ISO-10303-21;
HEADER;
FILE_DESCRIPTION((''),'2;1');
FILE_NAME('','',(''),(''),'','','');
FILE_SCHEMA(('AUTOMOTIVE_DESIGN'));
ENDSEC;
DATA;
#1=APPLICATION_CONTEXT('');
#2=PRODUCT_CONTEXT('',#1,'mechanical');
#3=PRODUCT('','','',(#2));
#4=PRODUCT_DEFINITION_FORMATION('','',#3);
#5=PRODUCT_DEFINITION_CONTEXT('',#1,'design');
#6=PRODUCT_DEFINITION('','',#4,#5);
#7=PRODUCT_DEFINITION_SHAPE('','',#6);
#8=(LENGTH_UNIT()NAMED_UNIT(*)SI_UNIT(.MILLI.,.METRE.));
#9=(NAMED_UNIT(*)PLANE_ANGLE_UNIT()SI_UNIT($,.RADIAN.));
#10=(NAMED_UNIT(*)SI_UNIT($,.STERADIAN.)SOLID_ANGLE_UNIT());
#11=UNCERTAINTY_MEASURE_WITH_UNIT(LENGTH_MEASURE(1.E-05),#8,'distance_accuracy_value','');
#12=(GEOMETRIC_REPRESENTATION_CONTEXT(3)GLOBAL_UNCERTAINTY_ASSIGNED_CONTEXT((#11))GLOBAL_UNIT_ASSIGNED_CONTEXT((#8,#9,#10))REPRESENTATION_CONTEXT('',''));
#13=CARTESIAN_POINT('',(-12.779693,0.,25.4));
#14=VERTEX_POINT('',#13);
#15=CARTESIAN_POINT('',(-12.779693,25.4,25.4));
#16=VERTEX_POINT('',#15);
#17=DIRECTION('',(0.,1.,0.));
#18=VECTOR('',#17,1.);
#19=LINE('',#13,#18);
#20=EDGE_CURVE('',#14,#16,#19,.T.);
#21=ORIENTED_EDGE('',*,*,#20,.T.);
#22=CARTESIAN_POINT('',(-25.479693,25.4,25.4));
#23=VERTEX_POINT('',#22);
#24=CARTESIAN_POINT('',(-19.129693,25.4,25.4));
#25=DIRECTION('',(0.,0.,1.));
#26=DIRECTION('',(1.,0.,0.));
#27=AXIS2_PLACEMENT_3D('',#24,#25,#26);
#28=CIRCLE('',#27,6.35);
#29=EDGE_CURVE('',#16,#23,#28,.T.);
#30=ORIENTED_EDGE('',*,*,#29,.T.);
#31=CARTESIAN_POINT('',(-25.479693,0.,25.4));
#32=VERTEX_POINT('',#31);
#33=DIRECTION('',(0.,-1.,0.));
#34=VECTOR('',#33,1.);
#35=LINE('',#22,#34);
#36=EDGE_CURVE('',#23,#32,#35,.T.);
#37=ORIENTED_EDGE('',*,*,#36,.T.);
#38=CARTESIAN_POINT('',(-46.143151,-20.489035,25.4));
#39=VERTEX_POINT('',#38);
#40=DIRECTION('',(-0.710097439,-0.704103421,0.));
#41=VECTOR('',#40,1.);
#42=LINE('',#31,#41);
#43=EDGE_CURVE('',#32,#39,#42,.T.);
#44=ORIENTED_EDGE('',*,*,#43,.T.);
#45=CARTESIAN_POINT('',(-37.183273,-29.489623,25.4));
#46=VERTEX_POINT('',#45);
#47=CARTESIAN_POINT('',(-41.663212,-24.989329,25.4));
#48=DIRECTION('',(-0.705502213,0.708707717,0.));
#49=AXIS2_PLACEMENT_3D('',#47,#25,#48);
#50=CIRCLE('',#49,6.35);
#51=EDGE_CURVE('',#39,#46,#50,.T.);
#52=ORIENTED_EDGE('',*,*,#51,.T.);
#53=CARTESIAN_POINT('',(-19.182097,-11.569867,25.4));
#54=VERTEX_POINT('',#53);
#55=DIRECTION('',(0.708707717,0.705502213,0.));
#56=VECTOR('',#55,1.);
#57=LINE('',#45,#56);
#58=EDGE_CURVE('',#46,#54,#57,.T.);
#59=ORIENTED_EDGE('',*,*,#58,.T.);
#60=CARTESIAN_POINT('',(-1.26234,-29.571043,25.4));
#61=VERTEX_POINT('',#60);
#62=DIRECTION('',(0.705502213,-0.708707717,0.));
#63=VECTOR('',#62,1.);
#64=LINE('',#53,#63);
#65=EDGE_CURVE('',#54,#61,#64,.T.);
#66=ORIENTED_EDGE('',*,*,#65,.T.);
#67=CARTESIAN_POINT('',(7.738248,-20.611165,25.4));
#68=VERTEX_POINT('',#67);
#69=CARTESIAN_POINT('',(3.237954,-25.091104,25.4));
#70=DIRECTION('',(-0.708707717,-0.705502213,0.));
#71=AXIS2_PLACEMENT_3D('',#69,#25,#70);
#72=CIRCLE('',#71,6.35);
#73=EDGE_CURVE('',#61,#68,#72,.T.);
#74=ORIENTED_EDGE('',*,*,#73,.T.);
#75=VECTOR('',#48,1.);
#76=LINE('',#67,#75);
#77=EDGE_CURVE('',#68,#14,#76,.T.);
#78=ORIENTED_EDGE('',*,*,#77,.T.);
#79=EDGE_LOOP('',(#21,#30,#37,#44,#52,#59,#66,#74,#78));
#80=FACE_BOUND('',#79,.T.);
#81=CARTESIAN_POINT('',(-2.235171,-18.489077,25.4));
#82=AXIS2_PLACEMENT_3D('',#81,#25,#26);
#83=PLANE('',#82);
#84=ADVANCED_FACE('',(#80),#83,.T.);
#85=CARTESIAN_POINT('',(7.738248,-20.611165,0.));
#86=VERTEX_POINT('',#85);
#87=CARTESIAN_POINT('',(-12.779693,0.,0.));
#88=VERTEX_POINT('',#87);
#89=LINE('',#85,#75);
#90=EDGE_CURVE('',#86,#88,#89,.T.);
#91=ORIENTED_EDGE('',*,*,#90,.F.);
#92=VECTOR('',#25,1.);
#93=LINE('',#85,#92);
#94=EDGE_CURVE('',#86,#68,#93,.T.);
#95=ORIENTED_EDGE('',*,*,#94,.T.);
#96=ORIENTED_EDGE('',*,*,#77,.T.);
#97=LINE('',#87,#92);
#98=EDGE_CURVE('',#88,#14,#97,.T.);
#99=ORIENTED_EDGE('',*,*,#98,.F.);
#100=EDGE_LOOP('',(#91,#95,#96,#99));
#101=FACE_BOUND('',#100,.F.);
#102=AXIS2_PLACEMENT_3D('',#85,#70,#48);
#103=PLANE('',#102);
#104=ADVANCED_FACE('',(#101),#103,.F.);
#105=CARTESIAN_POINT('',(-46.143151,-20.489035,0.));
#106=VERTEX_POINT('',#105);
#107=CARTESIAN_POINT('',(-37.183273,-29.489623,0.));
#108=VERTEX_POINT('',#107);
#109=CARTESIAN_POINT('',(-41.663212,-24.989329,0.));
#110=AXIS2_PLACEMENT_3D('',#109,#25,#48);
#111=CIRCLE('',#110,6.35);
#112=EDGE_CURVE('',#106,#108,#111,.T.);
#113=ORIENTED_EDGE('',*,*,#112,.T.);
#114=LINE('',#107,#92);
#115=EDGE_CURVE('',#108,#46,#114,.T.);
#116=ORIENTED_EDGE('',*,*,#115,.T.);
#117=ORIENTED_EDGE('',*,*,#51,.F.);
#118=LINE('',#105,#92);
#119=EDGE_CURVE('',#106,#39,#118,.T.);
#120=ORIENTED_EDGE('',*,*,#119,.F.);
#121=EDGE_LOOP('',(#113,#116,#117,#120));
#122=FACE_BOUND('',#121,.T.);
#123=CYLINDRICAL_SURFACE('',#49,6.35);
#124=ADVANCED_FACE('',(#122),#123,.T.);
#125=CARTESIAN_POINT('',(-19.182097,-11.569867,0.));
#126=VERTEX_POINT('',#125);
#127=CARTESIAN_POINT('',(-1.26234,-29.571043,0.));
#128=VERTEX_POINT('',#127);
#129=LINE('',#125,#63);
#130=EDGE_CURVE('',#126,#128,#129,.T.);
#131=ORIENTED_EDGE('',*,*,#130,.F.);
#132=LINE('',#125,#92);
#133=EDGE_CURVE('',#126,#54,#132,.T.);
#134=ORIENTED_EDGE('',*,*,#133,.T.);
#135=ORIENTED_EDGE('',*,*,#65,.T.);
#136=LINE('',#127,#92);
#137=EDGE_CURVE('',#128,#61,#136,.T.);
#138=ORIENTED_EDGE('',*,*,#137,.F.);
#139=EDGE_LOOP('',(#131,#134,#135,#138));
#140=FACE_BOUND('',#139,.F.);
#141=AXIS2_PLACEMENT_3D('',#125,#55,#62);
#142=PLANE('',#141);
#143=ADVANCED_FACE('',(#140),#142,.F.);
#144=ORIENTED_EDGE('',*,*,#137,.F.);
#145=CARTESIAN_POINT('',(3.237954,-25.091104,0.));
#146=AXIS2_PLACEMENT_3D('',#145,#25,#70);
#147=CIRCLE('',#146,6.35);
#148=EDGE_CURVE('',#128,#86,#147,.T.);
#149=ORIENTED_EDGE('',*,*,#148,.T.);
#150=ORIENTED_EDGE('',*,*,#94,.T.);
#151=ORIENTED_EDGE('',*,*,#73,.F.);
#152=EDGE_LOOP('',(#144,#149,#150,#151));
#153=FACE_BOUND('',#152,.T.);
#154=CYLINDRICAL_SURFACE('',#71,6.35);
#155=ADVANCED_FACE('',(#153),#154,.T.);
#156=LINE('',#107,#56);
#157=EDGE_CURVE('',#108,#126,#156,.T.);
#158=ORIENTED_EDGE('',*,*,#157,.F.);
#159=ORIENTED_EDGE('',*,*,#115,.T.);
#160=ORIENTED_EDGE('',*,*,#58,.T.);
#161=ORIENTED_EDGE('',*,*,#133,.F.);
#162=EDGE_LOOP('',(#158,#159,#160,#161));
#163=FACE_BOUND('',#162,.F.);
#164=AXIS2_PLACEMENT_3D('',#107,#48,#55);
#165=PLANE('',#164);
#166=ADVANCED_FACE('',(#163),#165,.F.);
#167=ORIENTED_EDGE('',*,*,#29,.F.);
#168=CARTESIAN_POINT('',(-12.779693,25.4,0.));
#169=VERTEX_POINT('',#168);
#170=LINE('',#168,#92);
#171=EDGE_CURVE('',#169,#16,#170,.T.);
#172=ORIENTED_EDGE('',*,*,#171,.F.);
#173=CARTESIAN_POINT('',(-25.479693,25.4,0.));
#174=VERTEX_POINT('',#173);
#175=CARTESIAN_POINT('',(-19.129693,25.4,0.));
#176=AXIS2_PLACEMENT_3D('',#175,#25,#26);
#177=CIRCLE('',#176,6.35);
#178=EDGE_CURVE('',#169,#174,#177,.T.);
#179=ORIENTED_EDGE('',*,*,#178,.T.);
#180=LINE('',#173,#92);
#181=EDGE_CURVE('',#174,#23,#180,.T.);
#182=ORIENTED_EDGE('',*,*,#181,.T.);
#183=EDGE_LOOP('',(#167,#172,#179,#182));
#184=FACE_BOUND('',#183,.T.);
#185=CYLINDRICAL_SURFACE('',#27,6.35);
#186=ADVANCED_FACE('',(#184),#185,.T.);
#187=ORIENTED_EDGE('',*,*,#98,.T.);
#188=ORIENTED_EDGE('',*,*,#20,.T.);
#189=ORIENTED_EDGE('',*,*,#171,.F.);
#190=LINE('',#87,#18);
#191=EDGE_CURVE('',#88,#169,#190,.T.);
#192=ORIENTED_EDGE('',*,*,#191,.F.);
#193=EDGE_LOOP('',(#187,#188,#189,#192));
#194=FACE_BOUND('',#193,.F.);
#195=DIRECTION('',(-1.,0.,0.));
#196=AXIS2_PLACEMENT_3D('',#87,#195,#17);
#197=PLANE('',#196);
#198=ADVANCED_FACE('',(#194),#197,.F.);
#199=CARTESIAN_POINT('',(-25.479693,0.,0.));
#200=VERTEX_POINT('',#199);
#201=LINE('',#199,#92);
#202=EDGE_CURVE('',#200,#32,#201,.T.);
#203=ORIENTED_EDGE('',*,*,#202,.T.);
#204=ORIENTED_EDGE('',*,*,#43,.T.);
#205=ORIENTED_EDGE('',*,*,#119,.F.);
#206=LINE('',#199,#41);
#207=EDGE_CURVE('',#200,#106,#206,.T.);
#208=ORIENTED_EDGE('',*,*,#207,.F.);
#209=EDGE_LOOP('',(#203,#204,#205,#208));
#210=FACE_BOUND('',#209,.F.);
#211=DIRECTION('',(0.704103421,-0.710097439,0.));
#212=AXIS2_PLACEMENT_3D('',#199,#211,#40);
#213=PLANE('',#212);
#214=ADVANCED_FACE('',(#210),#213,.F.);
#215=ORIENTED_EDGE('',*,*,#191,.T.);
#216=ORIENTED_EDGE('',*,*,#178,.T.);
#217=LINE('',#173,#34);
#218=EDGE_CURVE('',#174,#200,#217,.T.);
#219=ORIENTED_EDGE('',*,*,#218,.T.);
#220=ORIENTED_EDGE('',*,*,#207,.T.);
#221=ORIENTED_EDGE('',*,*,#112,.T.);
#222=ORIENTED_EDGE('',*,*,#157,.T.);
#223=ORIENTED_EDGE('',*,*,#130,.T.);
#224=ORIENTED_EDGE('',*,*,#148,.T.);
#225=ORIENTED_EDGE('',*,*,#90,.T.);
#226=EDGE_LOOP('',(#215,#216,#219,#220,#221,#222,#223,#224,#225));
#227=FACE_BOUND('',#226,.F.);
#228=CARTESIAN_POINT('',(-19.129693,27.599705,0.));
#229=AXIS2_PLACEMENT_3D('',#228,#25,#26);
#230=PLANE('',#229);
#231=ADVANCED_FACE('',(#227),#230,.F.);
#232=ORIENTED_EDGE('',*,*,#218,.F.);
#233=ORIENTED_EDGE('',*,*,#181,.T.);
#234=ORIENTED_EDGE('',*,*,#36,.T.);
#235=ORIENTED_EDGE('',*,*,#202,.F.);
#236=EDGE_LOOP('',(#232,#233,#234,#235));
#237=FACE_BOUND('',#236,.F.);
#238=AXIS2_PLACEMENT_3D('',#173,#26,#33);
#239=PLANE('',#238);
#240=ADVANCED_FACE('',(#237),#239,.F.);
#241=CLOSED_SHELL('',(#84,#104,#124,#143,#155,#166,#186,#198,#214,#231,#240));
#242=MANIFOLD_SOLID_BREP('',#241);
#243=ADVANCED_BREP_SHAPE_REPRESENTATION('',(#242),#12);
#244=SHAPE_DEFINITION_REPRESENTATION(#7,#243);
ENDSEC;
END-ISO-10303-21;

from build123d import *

# Parameters (mm, degrees)
F1_DEPTH = 25.4
F3_DEPTH = 25.4
F5_DEPTH = 114


# Not quite as in the source:
# - an extrude ends at something that could not be found from the text; its depth is read off the source's solid


with BuildPart() as f1:
    # F0 (on Top) → F1 (new body)
    with BuildSketch(Plane.XY):
        Polygon((-25.4796925148, 25.4), (-25.4796925148, 0), (-46.1431506129, -20.4890353627), (-37.1832725133, -29.489623368), (-19.1820965027, -11.569867169), (-1.2623403036, -29.5710431796), (7.7382477017, -20.61116508), (-12.7796925148, 0), (-12.7796925148, 25.4), align=None)
    extrude(amount=F1_DEPTH)

    # F2 (on face) → F3 (join)
    with BuildSketch(Plane.XY.offset(25.4)):
        with BuildLine():
            Line((-25.4796925148, 25.4), (-12.7796925148, 25.4))
            ThreePointArc((-12.7796925148, 25.4), (-19.1296925148, 31.75), (-25.4796925148, 25.4))
        make_face()
        with BuildLine():
            Line((7.7382477017, -20.61116508), (-1.2623403036, -29.5710431796))
            ThreePointArc((-1.2623403036, -29.5710431796), (7.7178927488, -29.5913981325), (7.7382477017, -20.61116508))
        make_face()
        with BuildLine():
            ThreePointArc((-46.1431506129, -20.4890353627), (-46.1635055657, -29.4692684152), (-37.1832725133, -29.489623368))
            Line((-37.1832725133, -29.489623368), (-46.1431506129, -20.4890353627))
        make_face()
    extrude(amount=-F3_DEPTH)

    # F4 (on face) → F5 (cut, through all)
    with BuildSketch(Plane.XY.offset(25.4)):
        with BuildLine():
            Line((-42.5259842963, -16.9024019821), (-40.6344192228, -15.0268038369))
            ThreePointArc((-40.6344192228, -15.0268038369), (-41.6786510297, -15.8653155428), (-42.5259842963, -16.9024019821))
        make_face()
        with BuildLine():
            ThreePointArc((-32.6380296989, -24.9649388112), (-31.2402342157, -22.88066907), (-30.7492439593, -20.4195837129))
            ThreePointArc((-30.7492439593, -20.4195837129), (-34.0912883888, -14.7893358325), (-40.6344192228, -15.0268038369))
            Line((-40.6344192228, -15.0268038369), (-42.5259842963, -16.9024019821))
            ThreePointArc((-42.5259842963, -16.9024019821), (-41.2158295319, -25.3902171382), (-32.6380296989, -24.9649388112))
        make_face()
        with BuildLine():
            ThreePointArc((3.3359301315, -18.6069775374), (2.8926555851, -16.371867323), (1.6299325028, -14.4750962741))
            ThreePointArc((1.6299325028, -14.4750962741), (-7.9341003982, -20.8420877519), (3.3359301315, -18.6069775374))
        make_face()
    extrude(amount=F5_DEPTH, mode=Mode.SUBTRACT)


solid = f1.part
